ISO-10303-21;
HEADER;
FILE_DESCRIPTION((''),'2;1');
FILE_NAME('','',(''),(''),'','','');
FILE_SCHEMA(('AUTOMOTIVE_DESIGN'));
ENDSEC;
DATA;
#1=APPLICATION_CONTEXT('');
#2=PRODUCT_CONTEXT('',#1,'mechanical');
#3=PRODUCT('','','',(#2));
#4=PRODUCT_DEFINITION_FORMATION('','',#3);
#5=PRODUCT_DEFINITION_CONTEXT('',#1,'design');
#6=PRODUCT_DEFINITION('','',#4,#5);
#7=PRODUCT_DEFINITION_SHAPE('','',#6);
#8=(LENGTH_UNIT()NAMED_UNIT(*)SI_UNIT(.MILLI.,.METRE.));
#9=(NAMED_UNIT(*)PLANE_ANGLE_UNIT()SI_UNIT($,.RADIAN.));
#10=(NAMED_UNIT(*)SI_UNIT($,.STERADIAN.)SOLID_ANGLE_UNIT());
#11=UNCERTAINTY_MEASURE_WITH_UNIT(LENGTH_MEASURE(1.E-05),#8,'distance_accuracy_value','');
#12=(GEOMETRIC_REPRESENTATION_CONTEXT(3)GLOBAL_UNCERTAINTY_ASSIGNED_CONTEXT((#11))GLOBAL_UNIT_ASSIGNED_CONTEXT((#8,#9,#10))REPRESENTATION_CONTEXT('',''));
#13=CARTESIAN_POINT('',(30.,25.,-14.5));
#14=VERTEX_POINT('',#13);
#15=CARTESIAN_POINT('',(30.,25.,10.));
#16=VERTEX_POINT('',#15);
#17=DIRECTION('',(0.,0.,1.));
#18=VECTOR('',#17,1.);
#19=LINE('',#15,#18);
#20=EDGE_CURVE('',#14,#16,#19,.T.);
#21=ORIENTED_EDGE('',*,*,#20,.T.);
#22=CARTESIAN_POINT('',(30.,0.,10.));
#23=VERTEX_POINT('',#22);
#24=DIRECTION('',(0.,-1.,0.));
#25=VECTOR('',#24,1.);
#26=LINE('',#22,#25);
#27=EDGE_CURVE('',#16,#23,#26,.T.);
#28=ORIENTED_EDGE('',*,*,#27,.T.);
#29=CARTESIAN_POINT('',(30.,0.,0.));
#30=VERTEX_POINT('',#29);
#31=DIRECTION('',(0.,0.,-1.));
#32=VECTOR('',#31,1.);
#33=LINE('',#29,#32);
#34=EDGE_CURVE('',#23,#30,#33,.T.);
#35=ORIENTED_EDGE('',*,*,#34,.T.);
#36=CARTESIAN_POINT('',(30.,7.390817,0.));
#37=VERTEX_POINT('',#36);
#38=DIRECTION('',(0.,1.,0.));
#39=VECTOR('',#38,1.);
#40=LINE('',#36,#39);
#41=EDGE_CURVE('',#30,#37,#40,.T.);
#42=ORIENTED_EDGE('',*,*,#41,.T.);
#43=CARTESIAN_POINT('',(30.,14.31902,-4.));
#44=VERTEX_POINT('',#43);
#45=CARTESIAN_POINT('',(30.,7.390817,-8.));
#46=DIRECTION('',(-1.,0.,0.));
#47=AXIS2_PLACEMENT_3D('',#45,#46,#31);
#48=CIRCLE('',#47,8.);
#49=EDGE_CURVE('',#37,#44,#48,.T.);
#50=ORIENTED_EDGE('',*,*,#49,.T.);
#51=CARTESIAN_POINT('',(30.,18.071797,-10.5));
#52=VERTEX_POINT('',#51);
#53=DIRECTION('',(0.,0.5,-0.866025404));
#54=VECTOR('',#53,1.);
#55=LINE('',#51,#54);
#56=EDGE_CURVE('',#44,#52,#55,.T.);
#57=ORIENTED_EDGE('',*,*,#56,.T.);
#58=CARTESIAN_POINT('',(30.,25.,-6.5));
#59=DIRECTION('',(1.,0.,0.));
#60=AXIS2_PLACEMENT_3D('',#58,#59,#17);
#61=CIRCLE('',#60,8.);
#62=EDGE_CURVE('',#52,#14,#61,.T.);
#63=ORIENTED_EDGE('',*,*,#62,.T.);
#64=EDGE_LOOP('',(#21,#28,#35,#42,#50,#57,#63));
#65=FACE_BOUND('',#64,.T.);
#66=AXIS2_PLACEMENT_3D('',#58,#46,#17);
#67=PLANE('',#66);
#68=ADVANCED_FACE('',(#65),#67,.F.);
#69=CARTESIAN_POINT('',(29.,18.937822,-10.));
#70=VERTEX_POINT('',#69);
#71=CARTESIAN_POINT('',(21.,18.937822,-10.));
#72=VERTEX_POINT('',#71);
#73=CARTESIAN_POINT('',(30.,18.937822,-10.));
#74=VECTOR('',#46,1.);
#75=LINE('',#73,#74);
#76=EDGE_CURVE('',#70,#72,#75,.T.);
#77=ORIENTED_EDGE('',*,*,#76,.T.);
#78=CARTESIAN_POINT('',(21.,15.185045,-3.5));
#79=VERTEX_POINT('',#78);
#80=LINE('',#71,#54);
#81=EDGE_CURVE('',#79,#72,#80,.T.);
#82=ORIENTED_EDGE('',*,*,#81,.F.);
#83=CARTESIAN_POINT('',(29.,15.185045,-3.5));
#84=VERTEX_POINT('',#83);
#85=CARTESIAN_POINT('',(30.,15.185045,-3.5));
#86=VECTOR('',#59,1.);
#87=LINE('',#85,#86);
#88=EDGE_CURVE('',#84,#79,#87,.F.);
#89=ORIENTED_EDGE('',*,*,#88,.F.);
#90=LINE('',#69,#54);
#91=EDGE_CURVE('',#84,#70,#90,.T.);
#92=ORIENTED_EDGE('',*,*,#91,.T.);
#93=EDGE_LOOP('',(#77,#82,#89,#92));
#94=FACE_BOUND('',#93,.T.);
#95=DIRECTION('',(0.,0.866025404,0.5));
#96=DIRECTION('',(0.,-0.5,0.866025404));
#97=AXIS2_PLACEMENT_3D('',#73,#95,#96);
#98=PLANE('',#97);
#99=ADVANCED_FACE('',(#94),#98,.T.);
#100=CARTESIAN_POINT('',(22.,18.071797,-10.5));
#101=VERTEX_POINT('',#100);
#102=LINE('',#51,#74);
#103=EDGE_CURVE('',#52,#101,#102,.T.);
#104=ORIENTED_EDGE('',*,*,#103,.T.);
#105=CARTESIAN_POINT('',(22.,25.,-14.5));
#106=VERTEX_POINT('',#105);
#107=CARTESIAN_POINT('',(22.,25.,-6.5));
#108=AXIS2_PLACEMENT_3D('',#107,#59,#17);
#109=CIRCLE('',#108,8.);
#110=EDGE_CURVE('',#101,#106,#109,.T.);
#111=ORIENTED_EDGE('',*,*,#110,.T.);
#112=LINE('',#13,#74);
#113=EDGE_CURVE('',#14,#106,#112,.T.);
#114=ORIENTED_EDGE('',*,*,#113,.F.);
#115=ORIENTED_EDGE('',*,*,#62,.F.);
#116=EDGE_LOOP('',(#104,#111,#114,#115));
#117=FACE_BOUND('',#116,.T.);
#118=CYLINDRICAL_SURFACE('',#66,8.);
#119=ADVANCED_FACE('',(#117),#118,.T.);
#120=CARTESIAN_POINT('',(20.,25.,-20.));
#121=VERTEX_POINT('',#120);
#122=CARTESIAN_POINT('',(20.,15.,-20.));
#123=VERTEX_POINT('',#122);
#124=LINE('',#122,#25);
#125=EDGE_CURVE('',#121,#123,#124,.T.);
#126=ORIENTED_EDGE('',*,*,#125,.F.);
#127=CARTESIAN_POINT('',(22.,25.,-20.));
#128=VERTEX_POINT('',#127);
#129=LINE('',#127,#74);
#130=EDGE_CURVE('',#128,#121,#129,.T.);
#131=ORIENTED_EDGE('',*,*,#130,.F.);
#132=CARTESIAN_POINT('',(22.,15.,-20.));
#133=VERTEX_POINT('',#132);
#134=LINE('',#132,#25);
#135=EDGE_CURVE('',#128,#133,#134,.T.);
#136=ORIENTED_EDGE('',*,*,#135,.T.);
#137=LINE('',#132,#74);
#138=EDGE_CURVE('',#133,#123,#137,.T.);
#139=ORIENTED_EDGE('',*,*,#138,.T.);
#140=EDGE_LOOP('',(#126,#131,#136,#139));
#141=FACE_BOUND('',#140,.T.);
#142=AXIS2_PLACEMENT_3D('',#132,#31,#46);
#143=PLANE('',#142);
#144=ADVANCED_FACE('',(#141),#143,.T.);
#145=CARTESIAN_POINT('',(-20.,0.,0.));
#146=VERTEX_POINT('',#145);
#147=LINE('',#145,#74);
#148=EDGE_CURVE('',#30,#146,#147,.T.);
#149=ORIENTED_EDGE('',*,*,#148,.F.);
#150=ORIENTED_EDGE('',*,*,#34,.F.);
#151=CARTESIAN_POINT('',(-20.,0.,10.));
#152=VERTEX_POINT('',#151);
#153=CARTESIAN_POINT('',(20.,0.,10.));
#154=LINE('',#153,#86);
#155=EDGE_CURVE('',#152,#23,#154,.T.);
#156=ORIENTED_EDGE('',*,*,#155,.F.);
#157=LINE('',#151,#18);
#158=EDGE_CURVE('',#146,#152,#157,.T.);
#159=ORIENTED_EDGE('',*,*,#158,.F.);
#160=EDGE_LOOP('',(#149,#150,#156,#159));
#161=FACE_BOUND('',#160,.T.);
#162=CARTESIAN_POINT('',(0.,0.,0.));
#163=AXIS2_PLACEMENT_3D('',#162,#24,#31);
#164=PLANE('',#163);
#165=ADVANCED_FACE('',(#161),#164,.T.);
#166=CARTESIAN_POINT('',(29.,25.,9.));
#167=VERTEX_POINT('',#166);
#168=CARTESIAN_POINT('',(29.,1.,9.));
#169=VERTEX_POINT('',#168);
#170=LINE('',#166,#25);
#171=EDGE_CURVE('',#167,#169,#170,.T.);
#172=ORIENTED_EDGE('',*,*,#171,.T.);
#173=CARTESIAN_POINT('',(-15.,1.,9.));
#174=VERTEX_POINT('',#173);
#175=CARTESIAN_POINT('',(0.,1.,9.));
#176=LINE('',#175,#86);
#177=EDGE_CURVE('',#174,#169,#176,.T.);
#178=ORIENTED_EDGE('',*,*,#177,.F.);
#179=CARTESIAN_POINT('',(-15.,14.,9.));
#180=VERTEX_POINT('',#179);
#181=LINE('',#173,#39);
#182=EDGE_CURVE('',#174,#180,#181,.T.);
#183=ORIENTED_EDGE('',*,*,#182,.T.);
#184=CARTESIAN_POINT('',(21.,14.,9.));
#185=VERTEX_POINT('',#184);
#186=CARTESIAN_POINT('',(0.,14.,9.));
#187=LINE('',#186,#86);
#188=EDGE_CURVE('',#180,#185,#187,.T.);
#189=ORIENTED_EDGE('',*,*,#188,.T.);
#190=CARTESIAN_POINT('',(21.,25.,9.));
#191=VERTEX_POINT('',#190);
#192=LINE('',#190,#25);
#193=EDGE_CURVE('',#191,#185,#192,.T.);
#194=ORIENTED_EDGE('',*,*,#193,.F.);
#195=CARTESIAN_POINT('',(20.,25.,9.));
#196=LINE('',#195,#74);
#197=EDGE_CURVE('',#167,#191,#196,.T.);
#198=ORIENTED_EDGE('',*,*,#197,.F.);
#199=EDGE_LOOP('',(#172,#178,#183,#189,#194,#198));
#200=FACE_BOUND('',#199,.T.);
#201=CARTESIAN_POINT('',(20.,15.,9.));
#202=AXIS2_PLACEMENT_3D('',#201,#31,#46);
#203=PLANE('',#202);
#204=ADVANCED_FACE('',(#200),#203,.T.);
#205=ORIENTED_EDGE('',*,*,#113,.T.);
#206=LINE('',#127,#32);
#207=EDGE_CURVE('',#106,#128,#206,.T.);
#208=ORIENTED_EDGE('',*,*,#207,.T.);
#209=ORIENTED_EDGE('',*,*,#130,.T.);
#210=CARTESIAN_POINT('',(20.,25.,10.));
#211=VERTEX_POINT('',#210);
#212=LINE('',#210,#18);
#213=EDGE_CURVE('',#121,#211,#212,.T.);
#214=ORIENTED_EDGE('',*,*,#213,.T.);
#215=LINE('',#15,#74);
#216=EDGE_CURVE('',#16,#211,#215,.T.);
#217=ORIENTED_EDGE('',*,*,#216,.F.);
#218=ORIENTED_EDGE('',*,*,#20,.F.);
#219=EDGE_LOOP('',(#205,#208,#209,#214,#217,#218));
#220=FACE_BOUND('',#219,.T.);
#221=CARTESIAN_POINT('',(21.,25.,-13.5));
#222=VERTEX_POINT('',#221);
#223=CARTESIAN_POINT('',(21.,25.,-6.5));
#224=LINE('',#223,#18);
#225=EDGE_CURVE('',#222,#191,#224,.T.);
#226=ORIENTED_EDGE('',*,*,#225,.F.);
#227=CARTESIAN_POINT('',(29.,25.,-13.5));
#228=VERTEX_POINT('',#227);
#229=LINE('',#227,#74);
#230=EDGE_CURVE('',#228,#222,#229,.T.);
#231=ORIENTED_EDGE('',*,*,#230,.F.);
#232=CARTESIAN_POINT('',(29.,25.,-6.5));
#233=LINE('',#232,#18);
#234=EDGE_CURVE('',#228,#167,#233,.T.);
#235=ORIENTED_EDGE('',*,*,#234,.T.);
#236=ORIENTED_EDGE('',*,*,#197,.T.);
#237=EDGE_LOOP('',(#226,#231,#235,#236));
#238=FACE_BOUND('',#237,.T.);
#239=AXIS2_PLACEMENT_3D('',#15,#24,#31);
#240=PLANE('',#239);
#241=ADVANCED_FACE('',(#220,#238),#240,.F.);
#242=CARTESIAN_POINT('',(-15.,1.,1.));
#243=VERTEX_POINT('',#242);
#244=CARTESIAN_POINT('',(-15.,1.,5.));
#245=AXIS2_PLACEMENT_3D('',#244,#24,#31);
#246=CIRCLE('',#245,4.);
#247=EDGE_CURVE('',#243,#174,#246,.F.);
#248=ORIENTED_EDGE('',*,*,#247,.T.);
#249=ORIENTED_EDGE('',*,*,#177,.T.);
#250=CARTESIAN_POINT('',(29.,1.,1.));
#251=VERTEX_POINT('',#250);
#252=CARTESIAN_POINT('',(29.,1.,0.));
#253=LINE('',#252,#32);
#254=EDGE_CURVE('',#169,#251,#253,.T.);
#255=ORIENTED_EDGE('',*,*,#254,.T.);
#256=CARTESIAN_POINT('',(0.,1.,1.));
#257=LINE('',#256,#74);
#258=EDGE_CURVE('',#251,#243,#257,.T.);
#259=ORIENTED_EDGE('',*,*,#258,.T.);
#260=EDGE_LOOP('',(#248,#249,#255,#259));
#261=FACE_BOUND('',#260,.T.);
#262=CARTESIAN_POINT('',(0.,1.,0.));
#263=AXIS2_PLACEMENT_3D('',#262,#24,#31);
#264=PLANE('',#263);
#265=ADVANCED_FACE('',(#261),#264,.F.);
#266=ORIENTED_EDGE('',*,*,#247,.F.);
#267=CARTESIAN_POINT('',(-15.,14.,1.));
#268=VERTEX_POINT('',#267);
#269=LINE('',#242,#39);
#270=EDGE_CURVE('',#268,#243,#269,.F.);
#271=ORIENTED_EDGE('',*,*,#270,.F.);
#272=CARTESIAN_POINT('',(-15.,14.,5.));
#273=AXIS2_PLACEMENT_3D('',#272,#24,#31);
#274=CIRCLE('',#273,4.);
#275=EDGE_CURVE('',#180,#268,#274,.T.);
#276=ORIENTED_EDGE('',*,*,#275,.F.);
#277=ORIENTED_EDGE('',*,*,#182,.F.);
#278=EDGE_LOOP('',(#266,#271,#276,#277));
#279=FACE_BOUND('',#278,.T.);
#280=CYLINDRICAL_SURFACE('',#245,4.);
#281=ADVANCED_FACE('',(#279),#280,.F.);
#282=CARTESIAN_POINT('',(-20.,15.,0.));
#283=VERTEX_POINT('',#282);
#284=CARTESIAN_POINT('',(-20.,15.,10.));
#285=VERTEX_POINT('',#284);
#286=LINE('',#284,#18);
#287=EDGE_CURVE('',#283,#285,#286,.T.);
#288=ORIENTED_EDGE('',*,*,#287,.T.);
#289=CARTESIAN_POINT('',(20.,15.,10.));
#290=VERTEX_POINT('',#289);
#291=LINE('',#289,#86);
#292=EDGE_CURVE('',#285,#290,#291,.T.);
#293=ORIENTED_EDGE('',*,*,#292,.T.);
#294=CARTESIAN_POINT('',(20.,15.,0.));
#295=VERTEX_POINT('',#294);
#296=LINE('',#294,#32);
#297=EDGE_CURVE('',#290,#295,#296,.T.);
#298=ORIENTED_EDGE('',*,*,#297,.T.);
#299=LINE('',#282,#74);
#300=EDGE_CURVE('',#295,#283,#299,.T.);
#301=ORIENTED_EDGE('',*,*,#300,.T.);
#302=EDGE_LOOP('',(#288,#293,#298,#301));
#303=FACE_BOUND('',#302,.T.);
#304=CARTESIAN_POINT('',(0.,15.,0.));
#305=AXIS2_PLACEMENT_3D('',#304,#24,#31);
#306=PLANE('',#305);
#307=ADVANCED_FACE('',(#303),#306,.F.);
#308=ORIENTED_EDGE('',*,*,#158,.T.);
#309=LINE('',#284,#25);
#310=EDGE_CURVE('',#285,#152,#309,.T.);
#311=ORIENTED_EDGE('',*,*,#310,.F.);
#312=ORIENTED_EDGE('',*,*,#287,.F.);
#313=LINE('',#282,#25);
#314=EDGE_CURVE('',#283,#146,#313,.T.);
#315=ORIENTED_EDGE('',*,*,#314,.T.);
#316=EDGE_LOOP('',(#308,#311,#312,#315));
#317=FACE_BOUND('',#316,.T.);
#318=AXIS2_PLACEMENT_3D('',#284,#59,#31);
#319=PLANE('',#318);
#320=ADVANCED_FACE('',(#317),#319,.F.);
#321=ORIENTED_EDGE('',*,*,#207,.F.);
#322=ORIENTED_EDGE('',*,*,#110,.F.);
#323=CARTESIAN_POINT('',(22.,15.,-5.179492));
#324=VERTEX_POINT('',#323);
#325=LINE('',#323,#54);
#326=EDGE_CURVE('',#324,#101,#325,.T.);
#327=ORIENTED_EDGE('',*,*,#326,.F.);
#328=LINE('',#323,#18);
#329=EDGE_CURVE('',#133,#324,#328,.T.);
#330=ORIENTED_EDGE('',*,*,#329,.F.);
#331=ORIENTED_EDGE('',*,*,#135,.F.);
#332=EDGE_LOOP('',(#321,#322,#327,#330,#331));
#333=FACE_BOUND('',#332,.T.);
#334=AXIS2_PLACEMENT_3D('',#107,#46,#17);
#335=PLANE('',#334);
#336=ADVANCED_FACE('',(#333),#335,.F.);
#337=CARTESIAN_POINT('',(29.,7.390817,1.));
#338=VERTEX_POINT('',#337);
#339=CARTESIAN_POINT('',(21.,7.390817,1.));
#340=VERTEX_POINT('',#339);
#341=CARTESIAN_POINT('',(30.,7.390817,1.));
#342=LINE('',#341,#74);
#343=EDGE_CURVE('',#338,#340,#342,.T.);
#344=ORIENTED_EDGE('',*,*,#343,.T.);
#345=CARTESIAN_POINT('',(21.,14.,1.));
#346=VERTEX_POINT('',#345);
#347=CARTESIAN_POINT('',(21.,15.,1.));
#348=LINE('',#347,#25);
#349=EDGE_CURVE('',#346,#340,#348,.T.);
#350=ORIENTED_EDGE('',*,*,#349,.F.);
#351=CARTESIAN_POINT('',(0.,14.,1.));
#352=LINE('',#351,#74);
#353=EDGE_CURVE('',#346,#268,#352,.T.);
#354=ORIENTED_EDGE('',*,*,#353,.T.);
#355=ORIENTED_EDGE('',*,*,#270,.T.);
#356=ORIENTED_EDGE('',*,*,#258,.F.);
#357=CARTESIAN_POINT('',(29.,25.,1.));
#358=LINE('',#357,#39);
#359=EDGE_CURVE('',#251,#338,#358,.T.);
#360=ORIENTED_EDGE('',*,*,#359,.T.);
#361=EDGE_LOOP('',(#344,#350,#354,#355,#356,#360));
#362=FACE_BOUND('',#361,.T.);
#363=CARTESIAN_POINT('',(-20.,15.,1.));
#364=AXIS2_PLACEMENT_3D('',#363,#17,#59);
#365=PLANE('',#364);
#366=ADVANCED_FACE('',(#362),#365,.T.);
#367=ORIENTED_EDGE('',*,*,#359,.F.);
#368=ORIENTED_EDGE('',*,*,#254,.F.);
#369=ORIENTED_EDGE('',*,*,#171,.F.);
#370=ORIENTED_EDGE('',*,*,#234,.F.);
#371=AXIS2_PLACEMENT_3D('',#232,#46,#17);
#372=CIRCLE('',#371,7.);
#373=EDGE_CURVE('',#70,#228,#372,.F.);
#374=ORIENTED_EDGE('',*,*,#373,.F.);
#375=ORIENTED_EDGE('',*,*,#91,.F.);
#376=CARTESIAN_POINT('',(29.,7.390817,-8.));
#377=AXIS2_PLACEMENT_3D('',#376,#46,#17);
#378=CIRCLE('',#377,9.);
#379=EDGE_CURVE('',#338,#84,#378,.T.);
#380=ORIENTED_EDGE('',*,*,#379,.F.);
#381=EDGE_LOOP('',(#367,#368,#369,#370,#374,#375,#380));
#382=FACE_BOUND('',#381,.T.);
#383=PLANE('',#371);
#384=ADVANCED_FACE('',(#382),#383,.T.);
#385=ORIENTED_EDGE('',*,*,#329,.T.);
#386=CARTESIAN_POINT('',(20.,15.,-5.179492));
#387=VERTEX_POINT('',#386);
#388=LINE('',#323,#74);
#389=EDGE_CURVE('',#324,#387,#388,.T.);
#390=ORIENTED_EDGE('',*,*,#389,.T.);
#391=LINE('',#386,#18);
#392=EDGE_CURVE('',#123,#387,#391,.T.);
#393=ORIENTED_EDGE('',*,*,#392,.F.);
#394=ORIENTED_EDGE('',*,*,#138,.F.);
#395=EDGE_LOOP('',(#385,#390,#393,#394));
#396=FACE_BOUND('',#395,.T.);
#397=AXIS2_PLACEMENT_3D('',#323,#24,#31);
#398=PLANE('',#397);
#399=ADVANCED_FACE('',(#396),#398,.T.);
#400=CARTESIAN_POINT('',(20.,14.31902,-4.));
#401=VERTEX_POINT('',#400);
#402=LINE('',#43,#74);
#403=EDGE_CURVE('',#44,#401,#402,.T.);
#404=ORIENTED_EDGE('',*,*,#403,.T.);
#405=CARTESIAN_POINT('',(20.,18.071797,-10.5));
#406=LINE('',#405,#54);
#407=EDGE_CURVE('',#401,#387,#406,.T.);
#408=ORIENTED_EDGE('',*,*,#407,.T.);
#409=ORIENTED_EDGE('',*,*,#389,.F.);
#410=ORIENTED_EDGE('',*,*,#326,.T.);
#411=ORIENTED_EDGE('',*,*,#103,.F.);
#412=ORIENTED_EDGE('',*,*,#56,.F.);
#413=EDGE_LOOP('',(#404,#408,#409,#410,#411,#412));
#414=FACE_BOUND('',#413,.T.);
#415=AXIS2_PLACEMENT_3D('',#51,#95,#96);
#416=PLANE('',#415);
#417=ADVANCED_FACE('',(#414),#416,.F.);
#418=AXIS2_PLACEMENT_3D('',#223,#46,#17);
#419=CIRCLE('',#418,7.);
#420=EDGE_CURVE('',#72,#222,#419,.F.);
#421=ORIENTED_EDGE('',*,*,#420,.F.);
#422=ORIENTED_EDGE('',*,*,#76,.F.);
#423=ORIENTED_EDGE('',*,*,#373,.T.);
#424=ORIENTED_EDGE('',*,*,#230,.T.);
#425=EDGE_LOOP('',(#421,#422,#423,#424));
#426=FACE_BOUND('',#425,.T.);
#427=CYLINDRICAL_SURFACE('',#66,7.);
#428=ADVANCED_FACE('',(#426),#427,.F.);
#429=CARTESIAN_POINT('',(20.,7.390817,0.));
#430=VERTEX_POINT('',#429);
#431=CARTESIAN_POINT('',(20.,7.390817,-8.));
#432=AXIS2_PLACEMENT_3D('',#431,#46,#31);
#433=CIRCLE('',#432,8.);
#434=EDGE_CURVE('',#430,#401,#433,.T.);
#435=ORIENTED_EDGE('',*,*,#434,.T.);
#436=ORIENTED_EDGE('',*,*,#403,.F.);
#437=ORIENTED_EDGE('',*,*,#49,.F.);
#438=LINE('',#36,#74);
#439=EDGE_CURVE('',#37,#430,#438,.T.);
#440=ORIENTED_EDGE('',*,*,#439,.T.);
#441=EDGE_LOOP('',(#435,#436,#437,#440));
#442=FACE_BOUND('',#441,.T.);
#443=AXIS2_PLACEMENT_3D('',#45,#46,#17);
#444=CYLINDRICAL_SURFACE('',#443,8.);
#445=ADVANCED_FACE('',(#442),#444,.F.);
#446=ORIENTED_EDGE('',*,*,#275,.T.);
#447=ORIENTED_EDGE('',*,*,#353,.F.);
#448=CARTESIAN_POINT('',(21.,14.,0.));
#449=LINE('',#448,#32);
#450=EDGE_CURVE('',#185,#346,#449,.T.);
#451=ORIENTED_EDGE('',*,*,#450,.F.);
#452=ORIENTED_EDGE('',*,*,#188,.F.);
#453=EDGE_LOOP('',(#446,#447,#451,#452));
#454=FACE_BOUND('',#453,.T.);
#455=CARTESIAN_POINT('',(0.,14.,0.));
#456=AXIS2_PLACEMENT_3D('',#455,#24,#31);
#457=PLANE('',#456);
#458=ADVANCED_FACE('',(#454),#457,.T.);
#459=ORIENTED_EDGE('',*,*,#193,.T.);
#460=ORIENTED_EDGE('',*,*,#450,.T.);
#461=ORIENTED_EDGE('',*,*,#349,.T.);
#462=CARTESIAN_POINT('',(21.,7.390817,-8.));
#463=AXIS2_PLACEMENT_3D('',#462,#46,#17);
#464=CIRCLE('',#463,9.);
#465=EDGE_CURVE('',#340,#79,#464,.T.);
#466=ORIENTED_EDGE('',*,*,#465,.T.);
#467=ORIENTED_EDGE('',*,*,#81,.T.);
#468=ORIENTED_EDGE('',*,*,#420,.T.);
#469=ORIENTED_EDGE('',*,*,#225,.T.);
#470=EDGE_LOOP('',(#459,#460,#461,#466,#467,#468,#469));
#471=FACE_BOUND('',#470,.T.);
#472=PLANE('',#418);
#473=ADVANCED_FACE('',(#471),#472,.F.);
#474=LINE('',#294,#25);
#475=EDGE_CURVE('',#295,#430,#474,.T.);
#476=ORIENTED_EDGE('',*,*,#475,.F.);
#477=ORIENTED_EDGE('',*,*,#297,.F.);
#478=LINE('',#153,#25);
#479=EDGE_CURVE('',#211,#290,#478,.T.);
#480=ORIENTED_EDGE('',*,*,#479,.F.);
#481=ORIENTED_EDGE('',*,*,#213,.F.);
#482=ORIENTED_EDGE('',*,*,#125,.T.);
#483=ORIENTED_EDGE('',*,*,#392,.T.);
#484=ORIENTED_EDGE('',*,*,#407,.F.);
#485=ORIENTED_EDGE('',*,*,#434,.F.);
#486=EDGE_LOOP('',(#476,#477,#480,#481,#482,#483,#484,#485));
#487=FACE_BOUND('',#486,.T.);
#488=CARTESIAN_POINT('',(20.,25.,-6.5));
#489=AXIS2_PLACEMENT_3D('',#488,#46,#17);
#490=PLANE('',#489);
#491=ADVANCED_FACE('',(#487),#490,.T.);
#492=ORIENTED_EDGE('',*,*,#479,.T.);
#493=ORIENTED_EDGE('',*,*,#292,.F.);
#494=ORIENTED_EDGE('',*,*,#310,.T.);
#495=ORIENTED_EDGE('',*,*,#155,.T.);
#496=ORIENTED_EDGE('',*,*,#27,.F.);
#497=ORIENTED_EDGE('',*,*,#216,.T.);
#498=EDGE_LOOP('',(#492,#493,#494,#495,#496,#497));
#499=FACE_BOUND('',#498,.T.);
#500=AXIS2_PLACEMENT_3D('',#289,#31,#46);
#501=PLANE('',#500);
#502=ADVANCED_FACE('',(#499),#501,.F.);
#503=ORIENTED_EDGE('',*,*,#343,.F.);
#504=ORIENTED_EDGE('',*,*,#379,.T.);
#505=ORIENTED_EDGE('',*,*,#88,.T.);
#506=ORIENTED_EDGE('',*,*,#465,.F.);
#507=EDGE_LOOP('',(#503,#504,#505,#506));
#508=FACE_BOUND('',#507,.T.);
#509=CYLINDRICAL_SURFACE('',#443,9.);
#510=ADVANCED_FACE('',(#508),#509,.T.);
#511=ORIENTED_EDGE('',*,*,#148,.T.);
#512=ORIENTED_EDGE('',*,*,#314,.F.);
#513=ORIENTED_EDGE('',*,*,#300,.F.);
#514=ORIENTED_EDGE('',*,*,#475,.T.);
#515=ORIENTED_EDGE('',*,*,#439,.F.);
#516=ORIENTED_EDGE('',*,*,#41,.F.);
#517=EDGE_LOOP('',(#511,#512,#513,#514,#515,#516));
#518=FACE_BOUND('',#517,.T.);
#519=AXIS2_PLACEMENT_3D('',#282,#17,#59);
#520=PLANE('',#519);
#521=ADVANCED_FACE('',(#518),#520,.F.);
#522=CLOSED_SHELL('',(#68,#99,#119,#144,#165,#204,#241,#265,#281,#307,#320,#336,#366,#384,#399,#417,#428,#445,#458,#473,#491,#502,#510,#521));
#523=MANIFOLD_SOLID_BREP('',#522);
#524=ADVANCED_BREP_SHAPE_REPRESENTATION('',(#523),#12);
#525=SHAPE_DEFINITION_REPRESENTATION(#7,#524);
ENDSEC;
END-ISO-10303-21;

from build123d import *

# Parameters (mm, degrees)
SKETCH1_W           = 40
SKETCH1_H           = 10
BOSS_EXTRUDE1_DEPTH = 15
BOSS_EXTRUDE2_DEPTH = 10
BOSS_EXTRUDE3_DEPTH = 2
SHELL1_START        = -19
SHELL1_OUTLINE_W    = 13
SHELL1_OUTLINE_H    = 8
SHELL1_DEPTH        = 48
SHELL1_START_2      = 21
SHELL1_2_DEPTH      = 8
FILLET1_R           = 4


# Read off the part's stored shape, not the designer's step: Shell1
with BuildPart() as part:
    # Sketch1 → Boss-Extrude1 (new body)
    with BuildSketch(Plane(origin=(0, 0, 0), x_dir=(1, 0, 0), z_dir=(0, 1, 0))):
        with Locations((0, -5)):
            Rectangle(SKETCH1_W, SKETCH1_H)
    extrude(amount=BOSS_EXTRUDE1_DEPTH)

    # Sketch2 → Boss-Extrude2 (add)
    with BuildSketch(Plane(origin=(20, 0, 0), x_dir=(0, 0, -1), z_dir=(1, 0, 0))):
        with BuildLine():
            Line((-10, 0), (-10, 25))
            Line((-10, 25), (14.5, 25))
            ThreePointArc((14.5, 25), (13.42820323, 21), (10.5, 18.07179677))
            Line((10.5, 18.07179677), (4, 14.31902002))
            ThreePointArc((4, 14.31902002), (1.07179677, 11.39081679), (0, 7.39081679))
            Line((0, 7.39081679), (0, 0))
            Line((0, 0), (-10, 0))
        make_face()
    extrude(amount=BOSS_EXTRUDE2_DEPTH)

    # Sketch3 → Boss-Extrude3 (add)
    with BuildSketch(Plane.ZY.offset(-20)):
        with BuildLine():
            Line((-5.179491924, 15), (-20, 15))
            Line((-20, 15), (-20, 25))
            Line((-20, 25), (-14.5, 25))
            ThreePointArc((-14.5, 25), (-13.42820323, 21), (-10.5, 18.07179677))
            Line((-10.5, 18.07179677), (-5.179491924, 15))
        make_face()
    extrude(amount=-BOSS_EXTRUDE3_DEPTH)

    # Shell1 outline → Shell1 (cut)
    with BuildSketch(Plane.YZ.offset(SHELL1_START)):
        with Locations((7.5, 5)):
            Rectangle(SHELL1_OUTLINE_W, SHELL1_OUTLINE_H)
    extrude(amount=SHELL1_DEPTH, mode=Mode.SUBTRACT)

    # Shell1 2 outline → Shell1 2 (cut)
    with BuildSketch(Plane.YZ.offset(SHELL1_START_2)):
        with BuildLine():
            ThreePointArc((18.937822174, -10), (21.5, -12.562177826), (25, -13.5))
            Line((25, -13.5), (25, 9))
            Line((25, 9), (14, 9))
            Line((14, 9), (14, 1))
            Line((14, 1), (7.39081679, 1))
            ThreePointArc((7.39081679, 1), (11.89081679, -0.205771366), (15.185045424, -3.5))
            Line((15.185045424, -3.5), (18.937822174, -10))
        make_face()
    extrude(amount=SHELL1_2_DEPTH, mode=Mode.SUBTRACT)

    # Fillet1
    fillet1_edges = [part.edges().sort_by_distance(p)[0] for p in [
        (-19, 7.5, 1),
        (-19, 7.5, 9),
    ]]
    fillet(fillet1_edges, radius=FILLET1_R - 0.0001)  # a hair under: the kernel refuses the full size


solid = part.part
